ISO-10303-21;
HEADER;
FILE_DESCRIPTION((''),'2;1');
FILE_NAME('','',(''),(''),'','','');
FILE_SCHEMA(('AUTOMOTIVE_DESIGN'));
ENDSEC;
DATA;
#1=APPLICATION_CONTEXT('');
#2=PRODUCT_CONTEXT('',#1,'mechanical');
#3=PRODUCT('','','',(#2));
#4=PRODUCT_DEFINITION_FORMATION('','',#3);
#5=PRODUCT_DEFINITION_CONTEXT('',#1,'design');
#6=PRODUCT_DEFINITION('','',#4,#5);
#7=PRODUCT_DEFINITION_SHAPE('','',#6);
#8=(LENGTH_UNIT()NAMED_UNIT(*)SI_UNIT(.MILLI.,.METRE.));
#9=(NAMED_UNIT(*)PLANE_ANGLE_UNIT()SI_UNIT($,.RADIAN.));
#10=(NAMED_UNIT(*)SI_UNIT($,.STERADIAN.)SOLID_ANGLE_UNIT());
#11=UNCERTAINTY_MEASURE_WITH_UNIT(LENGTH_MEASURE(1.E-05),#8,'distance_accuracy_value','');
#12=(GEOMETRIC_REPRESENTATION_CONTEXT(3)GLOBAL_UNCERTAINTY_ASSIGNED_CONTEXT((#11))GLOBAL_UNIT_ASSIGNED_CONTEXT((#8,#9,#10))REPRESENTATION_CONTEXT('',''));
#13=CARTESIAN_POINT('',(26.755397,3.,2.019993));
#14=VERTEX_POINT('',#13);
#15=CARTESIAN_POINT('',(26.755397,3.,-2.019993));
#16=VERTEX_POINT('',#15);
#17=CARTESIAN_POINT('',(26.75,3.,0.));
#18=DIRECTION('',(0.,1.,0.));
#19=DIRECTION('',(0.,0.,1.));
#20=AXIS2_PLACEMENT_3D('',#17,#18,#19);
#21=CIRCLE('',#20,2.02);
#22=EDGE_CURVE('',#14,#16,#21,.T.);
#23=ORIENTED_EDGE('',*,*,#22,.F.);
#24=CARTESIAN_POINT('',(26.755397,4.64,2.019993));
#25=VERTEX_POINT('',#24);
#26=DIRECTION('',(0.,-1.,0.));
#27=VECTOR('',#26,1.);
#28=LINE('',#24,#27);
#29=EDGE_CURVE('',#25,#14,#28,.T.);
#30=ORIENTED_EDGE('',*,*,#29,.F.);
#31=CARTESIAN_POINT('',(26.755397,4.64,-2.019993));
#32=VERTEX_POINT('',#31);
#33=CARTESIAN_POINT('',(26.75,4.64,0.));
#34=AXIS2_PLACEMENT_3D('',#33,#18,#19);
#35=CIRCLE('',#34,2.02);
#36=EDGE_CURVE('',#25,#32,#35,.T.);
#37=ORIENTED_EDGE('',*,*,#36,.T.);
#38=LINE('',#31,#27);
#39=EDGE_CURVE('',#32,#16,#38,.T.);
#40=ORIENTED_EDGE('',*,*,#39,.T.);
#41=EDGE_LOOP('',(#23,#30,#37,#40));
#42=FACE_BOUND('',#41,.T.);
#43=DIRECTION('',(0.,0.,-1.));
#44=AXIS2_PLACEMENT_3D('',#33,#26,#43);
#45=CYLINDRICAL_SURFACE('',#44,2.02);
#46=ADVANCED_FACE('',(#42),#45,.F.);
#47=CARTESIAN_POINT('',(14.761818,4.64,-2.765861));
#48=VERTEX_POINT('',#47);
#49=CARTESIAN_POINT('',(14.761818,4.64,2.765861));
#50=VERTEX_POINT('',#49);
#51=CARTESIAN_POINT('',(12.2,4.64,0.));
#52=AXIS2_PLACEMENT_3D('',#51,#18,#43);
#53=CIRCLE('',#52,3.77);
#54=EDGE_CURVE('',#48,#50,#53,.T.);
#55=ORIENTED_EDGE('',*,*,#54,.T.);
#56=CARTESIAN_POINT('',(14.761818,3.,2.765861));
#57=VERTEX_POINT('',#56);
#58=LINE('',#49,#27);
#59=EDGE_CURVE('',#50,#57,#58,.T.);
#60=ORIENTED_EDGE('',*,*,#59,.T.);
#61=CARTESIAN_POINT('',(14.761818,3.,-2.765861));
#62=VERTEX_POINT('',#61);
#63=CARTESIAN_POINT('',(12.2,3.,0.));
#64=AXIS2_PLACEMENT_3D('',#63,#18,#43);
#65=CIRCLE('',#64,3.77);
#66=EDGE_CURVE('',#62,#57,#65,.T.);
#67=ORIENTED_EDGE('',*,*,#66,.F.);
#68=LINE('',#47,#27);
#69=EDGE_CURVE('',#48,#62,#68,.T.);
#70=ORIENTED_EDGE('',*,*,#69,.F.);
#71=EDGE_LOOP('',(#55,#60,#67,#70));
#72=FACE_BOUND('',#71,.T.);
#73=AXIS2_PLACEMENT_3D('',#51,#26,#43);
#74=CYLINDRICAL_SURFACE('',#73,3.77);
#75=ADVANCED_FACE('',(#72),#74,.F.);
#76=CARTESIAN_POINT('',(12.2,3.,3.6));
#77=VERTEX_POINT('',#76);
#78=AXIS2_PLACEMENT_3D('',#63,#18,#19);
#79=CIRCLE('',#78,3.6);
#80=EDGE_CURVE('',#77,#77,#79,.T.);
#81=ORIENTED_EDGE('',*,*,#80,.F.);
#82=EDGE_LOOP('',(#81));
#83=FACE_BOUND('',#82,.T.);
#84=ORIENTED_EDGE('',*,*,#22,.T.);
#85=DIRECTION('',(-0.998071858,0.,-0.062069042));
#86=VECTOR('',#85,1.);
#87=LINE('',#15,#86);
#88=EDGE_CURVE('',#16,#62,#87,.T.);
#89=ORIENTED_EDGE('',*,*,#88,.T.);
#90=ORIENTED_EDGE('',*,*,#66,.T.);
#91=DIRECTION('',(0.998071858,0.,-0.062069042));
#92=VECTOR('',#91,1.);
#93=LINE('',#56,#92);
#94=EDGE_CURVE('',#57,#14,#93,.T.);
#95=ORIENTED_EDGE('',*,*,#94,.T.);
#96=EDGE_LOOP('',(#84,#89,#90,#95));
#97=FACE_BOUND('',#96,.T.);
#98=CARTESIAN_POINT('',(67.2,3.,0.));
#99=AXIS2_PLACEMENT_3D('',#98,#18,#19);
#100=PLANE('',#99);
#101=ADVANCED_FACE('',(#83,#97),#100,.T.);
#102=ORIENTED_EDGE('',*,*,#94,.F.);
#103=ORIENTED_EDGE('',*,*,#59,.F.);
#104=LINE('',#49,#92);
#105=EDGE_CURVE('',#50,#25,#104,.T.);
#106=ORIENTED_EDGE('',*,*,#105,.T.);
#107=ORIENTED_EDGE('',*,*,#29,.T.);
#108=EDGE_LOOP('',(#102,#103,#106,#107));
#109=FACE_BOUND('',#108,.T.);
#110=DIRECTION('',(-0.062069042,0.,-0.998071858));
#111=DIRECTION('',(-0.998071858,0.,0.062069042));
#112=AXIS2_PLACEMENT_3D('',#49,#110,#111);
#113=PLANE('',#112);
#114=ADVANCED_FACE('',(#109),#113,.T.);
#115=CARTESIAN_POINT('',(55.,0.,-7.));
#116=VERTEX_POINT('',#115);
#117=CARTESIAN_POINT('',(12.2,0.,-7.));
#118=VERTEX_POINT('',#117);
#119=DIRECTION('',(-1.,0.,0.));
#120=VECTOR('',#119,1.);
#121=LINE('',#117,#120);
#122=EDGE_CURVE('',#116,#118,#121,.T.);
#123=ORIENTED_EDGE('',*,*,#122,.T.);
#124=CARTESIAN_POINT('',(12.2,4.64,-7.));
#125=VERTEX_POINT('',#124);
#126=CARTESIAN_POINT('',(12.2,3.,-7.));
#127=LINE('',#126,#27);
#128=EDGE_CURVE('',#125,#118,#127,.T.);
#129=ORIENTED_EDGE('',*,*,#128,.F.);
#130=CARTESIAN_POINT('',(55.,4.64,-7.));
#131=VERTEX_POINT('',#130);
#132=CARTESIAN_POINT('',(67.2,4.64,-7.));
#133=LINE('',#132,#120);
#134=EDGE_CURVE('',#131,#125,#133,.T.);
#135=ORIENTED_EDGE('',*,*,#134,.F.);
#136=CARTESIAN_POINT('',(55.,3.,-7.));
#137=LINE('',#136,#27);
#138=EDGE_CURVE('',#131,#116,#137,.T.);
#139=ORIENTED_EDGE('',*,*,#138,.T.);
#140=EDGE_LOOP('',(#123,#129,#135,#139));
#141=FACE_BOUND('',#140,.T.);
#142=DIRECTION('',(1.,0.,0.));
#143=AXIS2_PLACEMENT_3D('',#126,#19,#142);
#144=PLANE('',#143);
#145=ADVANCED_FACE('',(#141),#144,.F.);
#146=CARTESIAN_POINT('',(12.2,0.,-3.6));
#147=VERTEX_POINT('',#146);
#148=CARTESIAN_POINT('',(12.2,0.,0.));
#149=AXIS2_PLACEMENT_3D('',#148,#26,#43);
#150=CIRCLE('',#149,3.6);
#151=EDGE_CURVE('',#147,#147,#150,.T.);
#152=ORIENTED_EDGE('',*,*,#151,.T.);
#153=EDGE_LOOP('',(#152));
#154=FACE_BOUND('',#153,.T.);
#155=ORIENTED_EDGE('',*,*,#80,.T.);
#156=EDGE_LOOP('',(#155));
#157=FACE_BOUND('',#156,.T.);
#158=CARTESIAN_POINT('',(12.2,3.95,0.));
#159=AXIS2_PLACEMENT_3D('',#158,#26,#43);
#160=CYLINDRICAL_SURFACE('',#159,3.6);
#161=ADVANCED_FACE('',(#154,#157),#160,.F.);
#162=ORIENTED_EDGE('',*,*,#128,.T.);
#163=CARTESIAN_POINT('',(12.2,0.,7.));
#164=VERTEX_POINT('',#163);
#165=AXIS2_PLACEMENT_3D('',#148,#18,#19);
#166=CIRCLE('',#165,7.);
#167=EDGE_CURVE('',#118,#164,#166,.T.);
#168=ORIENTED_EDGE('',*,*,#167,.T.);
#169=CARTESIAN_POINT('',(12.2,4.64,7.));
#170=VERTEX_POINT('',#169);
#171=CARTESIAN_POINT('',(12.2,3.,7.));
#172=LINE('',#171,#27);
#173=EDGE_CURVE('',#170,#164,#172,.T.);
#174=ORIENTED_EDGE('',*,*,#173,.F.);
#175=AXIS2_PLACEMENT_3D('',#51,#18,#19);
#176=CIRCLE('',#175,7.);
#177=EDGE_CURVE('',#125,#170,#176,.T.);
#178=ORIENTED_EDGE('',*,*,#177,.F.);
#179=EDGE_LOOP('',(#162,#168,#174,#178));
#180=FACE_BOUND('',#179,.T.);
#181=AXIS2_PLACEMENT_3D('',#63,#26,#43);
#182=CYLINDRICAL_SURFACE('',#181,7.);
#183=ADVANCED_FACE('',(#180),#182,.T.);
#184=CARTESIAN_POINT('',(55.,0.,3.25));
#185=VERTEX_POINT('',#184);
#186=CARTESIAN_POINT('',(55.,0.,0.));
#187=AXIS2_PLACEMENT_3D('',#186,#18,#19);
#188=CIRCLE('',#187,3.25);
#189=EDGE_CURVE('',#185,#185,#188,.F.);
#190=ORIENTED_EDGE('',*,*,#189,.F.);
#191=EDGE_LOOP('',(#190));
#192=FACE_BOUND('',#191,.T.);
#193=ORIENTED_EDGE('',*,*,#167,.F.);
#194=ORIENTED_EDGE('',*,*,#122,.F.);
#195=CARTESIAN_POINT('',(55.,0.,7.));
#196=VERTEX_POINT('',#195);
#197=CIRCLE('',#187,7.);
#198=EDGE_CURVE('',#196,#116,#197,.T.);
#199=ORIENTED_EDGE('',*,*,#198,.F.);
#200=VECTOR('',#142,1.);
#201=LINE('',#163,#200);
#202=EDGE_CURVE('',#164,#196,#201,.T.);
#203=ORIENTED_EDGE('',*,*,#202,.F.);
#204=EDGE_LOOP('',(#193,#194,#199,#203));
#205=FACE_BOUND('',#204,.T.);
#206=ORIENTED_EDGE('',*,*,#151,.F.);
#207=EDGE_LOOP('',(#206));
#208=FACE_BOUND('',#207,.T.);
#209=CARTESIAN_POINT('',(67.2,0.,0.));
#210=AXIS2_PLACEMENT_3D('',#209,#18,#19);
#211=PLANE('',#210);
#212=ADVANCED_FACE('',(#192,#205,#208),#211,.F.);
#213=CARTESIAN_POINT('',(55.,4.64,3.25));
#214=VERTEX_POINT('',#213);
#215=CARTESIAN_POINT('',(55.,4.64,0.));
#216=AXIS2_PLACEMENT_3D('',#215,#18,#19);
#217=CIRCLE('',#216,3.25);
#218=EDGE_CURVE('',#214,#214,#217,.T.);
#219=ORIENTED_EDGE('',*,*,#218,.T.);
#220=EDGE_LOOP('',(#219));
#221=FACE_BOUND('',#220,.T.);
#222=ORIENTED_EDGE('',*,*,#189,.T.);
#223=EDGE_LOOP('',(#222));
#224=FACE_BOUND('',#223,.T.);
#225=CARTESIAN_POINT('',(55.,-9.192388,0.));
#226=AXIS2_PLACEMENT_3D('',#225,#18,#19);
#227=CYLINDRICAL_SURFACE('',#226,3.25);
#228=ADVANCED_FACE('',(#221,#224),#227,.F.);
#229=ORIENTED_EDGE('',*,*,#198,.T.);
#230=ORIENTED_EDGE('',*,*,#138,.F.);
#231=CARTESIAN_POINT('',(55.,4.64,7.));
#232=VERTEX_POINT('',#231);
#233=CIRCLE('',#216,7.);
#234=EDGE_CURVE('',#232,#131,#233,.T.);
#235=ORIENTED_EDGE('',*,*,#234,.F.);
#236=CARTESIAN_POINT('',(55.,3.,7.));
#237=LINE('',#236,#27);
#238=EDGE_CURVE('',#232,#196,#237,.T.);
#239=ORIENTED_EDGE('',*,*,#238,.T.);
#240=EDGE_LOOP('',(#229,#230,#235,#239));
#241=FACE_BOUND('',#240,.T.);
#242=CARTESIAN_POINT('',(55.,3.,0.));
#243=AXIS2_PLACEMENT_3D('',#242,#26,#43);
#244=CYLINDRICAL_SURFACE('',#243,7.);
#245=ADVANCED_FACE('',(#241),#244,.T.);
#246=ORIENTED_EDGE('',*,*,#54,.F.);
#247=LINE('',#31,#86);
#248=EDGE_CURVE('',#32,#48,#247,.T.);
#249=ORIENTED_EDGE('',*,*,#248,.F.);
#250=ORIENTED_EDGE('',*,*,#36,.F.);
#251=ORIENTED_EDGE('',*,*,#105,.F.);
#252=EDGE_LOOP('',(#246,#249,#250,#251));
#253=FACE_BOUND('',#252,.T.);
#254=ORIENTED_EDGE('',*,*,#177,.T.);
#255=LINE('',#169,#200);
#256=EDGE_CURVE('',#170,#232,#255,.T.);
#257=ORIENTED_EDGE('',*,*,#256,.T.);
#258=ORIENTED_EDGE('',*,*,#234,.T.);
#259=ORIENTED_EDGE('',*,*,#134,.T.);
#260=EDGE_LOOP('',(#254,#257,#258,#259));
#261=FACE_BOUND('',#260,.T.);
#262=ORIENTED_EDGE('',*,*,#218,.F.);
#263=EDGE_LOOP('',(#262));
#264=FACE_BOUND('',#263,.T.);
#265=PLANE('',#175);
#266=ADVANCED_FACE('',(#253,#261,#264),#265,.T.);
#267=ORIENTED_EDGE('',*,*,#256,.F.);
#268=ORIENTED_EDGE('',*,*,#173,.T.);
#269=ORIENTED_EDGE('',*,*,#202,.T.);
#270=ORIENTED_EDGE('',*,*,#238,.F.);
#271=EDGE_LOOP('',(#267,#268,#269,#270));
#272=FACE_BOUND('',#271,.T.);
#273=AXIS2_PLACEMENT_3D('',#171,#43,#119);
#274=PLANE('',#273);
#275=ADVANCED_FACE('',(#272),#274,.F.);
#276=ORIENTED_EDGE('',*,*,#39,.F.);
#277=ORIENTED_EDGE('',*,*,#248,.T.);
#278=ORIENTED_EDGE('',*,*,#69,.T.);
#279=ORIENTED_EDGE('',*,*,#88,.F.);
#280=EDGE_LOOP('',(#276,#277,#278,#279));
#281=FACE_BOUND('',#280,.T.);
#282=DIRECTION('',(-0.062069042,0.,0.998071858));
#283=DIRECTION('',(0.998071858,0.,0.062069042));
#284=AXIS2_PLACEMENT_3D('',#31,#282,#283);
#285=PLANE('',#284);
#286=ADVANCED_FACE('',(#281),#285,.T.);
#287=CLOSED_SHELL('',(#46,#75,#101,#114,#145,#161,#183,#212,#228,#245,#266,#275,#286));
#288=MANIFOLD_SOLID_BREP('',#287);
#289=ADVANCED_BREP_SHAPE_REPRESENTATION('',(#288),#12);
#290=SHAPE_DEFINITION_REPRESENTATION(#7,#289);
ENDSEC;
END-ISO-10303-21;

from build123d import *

# Parameters (mm, degrees)
BOSS_EXTRUDE1_DEPTH       = 3
SKETCH2_R                 = 3.6
CUT_EXTRUDE1_DEPTH        = 3.95
BOSS_EXTRUDE2_DEPTH       = 1.64
SKETCH4_R                 = 3.25
CUT_EXTRUDE2_DEPTH        = 4.64
CUT_EXTRUDE3_REACH        = 64.566
SKETCH7_W                 = 12.2
SKETCH7_H                 = 14
BODY_MOVE_COPY1_OUTLINE_R = 3.6
BODY_MOVE_COPY1_DEPTH     = 4.64
BODY_MOVE_COPY1_START     = 3
BODY_MOVE_COPY1_2_DEPTH   = 1.64
BODY_MOVE_COPY1_3_DEPTH   = 4.64
BODY_MOVE_COPY1_4_DEPTH   = 3


# Read off the part's stored shape, not the designer's step: Body-Move/Copy1
with BuildPart() as part:
    # Sketch1 → Boss-Extrude1 (new body)
    with BuildSketch(Plane(origin=(0, 0, 0), x_dir=(1, 0, 0), z_dir=(0, 1, 0))):
        with BuildLine():
            Line((0, 7), (55, 7))
            ThreePointArc((55, 7), (62, 0), (55, -7))
            Line((55, -7), (0, -7))
            ThreePointArc((0, -7), (-7, 0), (0, 7))
        make_face()
    extrude(amount=BOSS_EXTRUDE1_DEPTH)

    # Sketch2 → Cut-Extrude1 (cut)
    with BuildSketch(Plane.XZ):
        with Locations(Location((0, 0, 0), (0, 0, 270))):
            Circle(SKETCH2_R)
    extrude(amount=-CUT_EXTRUDE1_DEPTH, mode=Mode.SUBTRACT)

    # Sketch3 → Boss-Extrude2 (add)
    with BuildSketch(Plane(origin=(0, 3, 0), x_dir=(1, 0, 0), z_dir=(0, 1, 0))):
        with BuildLine():
            Line((0, -7), (55, -7))
            ThreePointArc((55, -7), (62, 0), (55, 7))
            Line((55, 7), (0, 7))
            ThreePointArc((0, 7), (-7, 0), (0, -7))
        make_face()
        with BuildLine():
            Line((14.555396889, 2.01999279), (2.561818442, 2.765860855))
            ThreePointArc((2.561818442, 2.765860855), (-3.77, 0), (2.561818442, -2.765860855))
            Line((2.561818442, -2.765860855), (14.555396889, -2.01999279))
            ThreePointArc((14.555396889, -2.01999279), (16.57, 0), (14.555396889, 2.01999279))
        make_face(mode=Mode.SUBTRACT)
    extrude(amount=BOSS_EXTRUDE2_DEPTH)

    # Sketch4 → Cut-Extrude2 (cut)
    with BuildSketch(Plane(origin=(0, 4.64, 0), x_dir=(1, 0, 0), z_dir=(0, 1, 0))):
        with Locations(Location((55, 0, 0), (0, 0, 270))):
            Circle(SKETCH4_R)
    extrude(amount=-CUT_EXTRUDE2_DEPTH, mode=Mode.SUBTRACT)

    # Sketch7 → Cut-Extrude3 (cut, up to next)
    with BuildSketch(Plane(origin=(0, 4.64, 0), x_dir=(1, 0, 0), z_dir=(0, 1, 0)), mode=Mode.PRIVATE) as cut_extrude3_sk1:
        with Locations((33.6, 0)):
            Rectangle(SKETCH7_W, SKETCH7_H)
    cut_extrude3_tool1 = extrude(cut_extrude3_sk1.sketch, amount=-CUT_EXTRUDE3_REACH, mode=Mode.PRIVATE) & part.part
    add(cut_extrude3_tool1.solids().sort_by_distance((33.6, 4.64, 0))[0], mode=Mode.SUBTRACT)


with BuildPart() as cut_extrude3_piece_1:
    # of the separate pieces the step leaves, piece 1, a body of its own (cut_extrude3_pieces)
    add(part.part.solids().sort_by_distance((0, 0, -7))[0])

    # Body-Move/Copy1 outline → Body-Move/Copy1 (cut)
    # profile 1 of 2: a face of its own
    with BuildSketch(Plane(origin=(0, 0, 0), x_dir=(1, 0, 0), z_dir=(0, 1, 0))):
        with BuildLine():
            Line((0, -7), (12.2, -7))
            ThreePointArc((12.2, -7), (5.2, 0), (12.2, 7))
            Line((12.2, 7), (0, 7))
            ThreePointArc((0, 7), (-7, 0), (0, -7))
        make_face()
        Circle(BODY_MOVE_COPY1_OUTLINE_R, mode=Mode.SUBTRACT)
    # profile 2 of 2: a face of its own
    with BuildSketch(Plane(origin=(0, 0, 0), x_dir=(1, 0, 0), z_dir=(0, 1, 0))):
        with Locations((12.2, 0)):
            Circle(BODY_MOVE_COPY1_OUTLINE_R)
    extrude(amount=BODY_MOVE_COPY1_DEPTH, mode=Mode.SUBTRACT)

    # Body-Move_Copy1 2 outline → Body-Move_Copy1 2 (cut)
    with BuildSketch(Plane(origin=(0, 0, 0), x_dir=(1, 0, 0), z_dir=(0, 1, 0)).offset(BODY_MOVE_COPY1_START)):
        with BuildLine():
            ThreePointArc((26.755396889, -2.01999279), (27.134536032, -1.983061279), (27.5, -1.875606568))
            Line((27.5, -1.875606568), (27.5, 1.875606568))
            ThreePointArc((27.5, 1.875606568), (27.134536032, 1.983061279), (26.755396889, 2.01999279))
            Line((26.755396889, 2.01999279), (14.761818442, 2.765860855))
            ThreePointArc((14.761818442, 2.765860855), (11.91613853, 3.759298161), (9.251901395, 2.349811613))
            Line((9.251901395, 2.349811613), (9.461484137, 2.336777882))
            ThreePointArc((9.461484137, 2.336777882), (12.476666707, 3.58935308), (15.264276596, 1.889499654))
            ThreePointArc((15.264276596, 1.889499654), (16.57, 0), (15.264276596, -1.889499654))
            ThreePointArc((15.264276596, -1.889499654), (12.476666707, -3.58935308), (9.461484137, -2.336777882))
            Line((9.461484137, -2.336777882), (9.251901395, -2.349811613))
            ThreePointArc((9.251901395, -2.349811613), (11.91613853, -3.759298161), (14.761818442, -2.765860855))
            Line((14.761818442, -2.765860855), (26.755396889, -2.01999279))
        make_face()
    extrude(amount=BODY_MOVE_COPY1_2_DEPTH, mode=Mode.SUBTRACT)

    # Body-Move_Copy1 3 outline → Body-Move_Copy1 3 (add)
    with BuildSketch(Plane(origin=(0, 0, 0), x_dir=(1, 0, 0), z_dir=(0, 1, 0))):
        with BuildLine():
            Line((27.5, -7), (39.7, -7))
            Line((39.7, -7), (39.7, 7))
            Line((39.7, 7), (27.5, 7))
            Line((27.5, 7), (27.5, 1.875606568))
            ThreePointArc((27.5, 1.875606568), (28.77, 0), (27.5, -1.875606568))
            Line((27.5, -1.875606568), (27.5, -7))
        make_face()
        with BuildLine():
            ThreePointArc((5.689385292, 2.571360753), (5.2, 0), (5.689385292, -2.571360753))
            Line((5.689385292, -2.571360753), (9.251901395, -2.349811613))
            ThreePointArc((9.251901395, -2.349811613), (8.43, 0), (9.251901395, 2.349811613))
            Line((9.251901395, 2.349811613), (5.689385292, 2.571360753))
        make_face()
    extrude(amount=BODY_MOVE_COPY1_3_DEPTH)

    # Body-Move_Copy1 4 outline → Body-Move_Copy1 4 (add)
    with BuildSketch(Plane(origin=(0, 0, 0), x_dir=(1, 0, 0), z_dir=(0, 1, 0))):
        with BuildLine():
            Line((27.5, 1.875606568), (27.5, -1.875606568))
            ThreePointArc((27.5, -1.875606568), (28.77, 0), (27.5, 1.875606568))
        make_face()
    extrude(amount=BODY_MOVE_COPY1_4_DEPTH)


with BuildPart() as cut_extrude3_piece_2:
    # of the separate pieces the step leaves, piece 2, a body of its own (cut_extrude3_pieces)
    add(part.part.solids().sort_by_distance((39.7, 0, -7))[0])


with BuildPart() as cut_extrude3_piece_1_1:
    add(cut_extrude3_piece_1.part)

    # Combine1: union Cut-Extrude3 piece 2
    add(cut_extrude3_piece_2.part)


solid = cut_extrude3_piece_1_1.part
